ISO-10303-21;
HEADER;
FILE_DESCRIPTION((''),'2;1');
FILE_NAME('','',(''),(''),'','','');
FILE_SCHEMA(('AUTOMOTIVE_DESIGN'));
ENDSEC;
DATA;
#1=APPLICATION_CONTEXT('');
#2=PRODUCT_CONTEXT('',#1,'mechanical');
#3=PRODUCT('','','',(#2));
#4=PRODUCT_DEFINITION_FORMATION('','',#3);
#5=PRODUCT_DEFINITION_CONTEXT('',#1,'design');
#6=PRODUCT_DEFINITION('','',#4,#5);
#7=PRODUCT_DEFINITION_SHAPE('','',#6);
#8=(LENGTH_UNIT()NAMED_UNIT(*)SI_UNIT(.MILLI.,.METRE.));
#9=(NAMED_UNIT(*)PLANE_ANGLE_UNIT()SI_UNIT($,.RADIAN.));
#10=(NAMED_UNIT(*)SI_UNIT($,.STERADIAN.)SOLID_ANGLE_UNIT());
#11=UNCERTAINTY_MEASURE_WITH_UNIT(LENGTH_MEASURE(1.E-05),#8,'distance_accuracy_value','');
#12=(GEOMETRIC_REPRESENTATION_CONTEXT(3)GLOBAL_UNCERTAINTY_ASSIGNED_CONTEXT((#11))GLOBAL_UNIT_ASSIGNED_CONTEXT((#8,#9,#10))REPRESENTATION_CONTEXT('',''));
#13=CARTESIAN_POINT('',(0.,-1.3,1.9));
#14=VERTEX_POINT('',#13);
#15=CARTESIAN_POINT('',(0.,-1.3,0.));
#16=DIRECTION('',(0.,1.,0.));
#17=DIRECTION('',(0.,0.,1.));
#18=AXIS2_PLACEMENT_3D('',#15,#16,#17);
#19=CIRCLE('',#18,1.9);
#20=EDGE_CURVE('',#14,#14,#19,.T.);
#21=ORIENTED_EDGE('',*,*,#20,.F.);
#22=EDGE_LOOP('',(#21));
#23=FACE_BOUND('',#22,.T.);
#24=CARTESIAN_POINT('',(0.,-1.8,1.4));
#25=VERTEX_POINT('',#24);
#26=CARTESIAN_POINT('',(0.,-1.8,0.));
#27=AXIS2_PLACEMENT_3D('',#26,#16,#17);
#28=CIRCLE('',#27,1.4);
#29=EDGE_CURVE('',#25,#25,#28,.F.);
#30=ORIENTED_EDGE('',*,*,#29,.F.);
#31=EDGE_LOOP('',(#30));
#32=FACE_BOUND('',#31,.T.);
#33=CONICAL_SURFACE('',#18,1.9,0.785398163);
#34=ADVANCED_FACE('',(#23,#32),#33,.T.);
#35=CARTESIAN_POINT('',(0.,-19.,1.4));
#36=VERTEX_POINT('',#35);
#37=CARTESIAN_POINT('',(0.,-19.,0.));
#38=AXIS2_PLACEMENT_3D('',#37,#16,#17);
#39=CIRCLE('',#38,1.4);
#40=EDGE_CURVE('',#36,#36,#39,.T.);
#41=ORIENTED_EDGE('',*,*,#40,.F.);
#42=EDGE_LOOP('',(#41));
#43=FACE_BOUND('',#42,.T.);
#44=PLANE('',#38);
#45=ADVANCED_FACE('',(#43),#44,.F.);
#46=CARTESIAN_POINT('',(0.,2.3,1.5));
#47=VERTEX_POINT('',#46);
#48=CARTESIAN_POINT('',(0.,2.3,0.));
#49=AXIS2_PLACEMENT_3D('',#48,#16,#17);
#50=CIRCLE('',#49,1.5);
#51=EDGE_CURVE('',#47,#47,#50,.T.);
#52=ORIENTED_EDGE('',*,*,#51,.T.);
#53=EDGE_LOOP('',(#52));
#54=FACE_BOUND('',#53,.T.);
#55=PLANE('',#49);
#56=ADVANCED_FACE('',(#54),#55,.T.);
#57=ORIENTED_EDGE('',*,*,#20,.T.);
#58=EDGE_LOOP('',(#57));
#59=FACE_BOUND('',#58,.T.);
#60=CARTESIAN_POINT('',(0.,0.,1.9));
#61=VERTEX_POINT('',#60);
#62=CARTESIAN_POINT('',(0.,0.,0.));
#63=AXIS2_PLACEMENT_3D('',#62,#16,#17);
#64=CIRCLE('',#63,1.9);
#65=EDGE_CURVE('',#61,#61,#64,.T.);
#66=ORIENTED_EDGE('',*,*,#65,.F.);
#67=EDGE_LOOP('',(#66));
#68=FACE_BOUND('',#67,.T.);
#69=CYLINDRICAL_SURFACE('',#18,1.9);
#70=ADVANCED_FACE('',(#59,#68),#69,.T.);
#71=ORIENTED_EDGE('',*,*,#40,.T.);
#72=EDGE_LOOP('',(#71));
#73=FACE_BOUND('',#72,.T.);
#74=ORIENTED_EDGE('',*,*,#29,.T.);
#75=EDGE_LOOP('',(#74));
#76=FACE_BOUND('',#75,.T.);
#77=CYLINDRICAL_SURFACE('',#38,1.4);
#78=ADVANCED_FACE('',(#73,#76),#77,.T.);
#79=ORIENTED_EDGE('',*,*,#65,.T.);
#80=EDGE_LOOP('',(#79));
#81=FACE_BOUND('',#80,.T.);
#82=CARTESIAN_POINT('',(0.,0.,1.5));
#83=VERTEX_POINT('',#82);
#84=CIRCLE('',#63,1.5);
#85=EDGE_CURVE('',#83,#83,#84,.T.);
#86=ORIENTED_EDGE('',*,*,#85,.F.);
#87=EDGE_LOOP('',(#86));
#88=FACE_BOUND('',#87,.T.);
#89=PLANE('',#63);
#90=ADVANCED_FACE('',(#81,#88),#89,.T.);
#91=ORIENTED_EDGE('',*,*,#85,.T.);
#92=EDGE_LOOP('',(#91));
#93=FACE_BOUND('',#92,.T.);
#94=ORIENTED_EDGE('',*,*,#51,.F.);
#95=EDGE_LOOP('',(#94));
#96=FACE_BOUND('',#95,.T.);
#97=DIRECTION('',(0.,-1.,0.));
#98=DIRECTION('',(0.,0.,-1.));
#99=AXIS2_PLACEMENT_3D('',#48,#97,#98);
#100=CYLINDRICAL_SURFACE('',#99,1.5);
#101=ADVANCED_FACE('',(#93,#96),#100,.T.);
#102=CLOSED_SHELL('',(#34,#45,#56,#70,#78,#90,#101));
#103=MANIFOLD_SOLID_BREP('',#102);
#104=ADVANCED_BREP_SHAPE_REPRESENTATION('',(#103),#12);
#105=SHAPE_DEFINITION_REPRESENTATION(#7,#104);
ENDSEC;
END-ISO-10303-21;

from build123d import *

# Parameters (mm, degrees)
SKETCH1_R           = 1.5
SKETCH1_R_2         = 1.4
BOSS_EXTRUDE1_DEPTH = 2.3
BOSS_EXTRUDE2_START = -1.3
SKETCH1_4_R         = 1.9
SKETCH1_4_R_2       = 1.5
SKETCH1_4_R_3       = 1.4
BOSS_EXTRUDE2_DEPTH = 1.3
SKETCH1_5_R         = 1.4
BOSS_EXTRUDE3_DEPTH = 19
CHAMFER1_SIZE       = 0.5


with BuildPart() as part:
    # Sketch1 → Boss-Extrude1 (new body)
    # profile 1 of 2: a face of its own
    with BuildSketch(Plane(origin=(0, 0, 0), x_dir=(1, 0, 0), z_dir=(0, 1, 0))):
        with Locations(Location((0, 0, 0), (0, 0, 270))):
            Circle(SKETCH1_R)
        Circle(SKETCH1_R_2, mode=Mode.SUBTRACT)
    # profile 2 of 2: a face of its own
    with BuildSketch(Plane(origin=(0, 0, 0), x_dir=(1, 0, 0), z_dir=(0, 1, 0))):
        Circle(SKETCH1_R_2)
    extrude(amount=BOSS_EXTRUDE1_DEPTH)

    # Sketch1<4> → Boss-Extrude2 (add)
    # profile 1 of 3: a face of its own
    with BuildSketch(Plane(origin=(0, 0, 0), x_dir=(1, 0, 0), z_dir=(0, 1, 0)).offset(BOSS_EXTRUDE2_START)):
        with Locations(Location((0, 0, 0), (0, 0, 270))):
            Circle(SKETCH1_4_R)
        with Locations(Location((0, 0, 0), (0, 0, 270))):
            Circle(SKETCH1_4_R_2, mode=Mode.SUBTRACT)
    # profile 2 of 3: a face of its own
    with BuildSketch(Plane(origin=(0, 0, 0), x_dir=(1, 0, 0), z_dir=(0, 1, 0)).offset(BOSS_EXTRUDE2_START)):
        with Locations(Location((0, 0, 0), (0, 0, 270))):
            Circle(SKETCH1_4_R_2)
        Circle(SKETCH1_4_R_3, mode=Mode.SUBTRACT)
    # profile 3 of 3: a face of its own
    with BuildSketch(Plane(origin=(0, 0, 0), x_dir=(1, 0, 0), z_dir=(0, 1, 0)).offset(BOSS_EXTRUDE2_START)):
        Circle(SKETCH1_4_R_3)
    extrude(amount=BOSS_EXTRUDE2_DEPTH)

    # Sketch1<5> → Boss-Extrude3 (add)
    with BuildSketch(Plane(origin=(0, 0, 0), x_dir=(1, 0, 0), z_dir=(0, 1, 0))):
        with Locations(Location((0, 0, 0), (0, 0, 270))):
            Circle(SKETCH1_5_R)
    extrude(amount=-BOSS_EXTRUDE3_DEPTH)

    # Chamfer1
    chamfer1_edges = [part.edges().sort_by_distance(p)[0] for p in [
        (0, -1.3, -1.4),
    ]]
    chamfer(chamfer1_edges, length=CHAMFER1_SIZE - 0.0001)  # a hair under: the kernel refuses the full size


solid = part.part
